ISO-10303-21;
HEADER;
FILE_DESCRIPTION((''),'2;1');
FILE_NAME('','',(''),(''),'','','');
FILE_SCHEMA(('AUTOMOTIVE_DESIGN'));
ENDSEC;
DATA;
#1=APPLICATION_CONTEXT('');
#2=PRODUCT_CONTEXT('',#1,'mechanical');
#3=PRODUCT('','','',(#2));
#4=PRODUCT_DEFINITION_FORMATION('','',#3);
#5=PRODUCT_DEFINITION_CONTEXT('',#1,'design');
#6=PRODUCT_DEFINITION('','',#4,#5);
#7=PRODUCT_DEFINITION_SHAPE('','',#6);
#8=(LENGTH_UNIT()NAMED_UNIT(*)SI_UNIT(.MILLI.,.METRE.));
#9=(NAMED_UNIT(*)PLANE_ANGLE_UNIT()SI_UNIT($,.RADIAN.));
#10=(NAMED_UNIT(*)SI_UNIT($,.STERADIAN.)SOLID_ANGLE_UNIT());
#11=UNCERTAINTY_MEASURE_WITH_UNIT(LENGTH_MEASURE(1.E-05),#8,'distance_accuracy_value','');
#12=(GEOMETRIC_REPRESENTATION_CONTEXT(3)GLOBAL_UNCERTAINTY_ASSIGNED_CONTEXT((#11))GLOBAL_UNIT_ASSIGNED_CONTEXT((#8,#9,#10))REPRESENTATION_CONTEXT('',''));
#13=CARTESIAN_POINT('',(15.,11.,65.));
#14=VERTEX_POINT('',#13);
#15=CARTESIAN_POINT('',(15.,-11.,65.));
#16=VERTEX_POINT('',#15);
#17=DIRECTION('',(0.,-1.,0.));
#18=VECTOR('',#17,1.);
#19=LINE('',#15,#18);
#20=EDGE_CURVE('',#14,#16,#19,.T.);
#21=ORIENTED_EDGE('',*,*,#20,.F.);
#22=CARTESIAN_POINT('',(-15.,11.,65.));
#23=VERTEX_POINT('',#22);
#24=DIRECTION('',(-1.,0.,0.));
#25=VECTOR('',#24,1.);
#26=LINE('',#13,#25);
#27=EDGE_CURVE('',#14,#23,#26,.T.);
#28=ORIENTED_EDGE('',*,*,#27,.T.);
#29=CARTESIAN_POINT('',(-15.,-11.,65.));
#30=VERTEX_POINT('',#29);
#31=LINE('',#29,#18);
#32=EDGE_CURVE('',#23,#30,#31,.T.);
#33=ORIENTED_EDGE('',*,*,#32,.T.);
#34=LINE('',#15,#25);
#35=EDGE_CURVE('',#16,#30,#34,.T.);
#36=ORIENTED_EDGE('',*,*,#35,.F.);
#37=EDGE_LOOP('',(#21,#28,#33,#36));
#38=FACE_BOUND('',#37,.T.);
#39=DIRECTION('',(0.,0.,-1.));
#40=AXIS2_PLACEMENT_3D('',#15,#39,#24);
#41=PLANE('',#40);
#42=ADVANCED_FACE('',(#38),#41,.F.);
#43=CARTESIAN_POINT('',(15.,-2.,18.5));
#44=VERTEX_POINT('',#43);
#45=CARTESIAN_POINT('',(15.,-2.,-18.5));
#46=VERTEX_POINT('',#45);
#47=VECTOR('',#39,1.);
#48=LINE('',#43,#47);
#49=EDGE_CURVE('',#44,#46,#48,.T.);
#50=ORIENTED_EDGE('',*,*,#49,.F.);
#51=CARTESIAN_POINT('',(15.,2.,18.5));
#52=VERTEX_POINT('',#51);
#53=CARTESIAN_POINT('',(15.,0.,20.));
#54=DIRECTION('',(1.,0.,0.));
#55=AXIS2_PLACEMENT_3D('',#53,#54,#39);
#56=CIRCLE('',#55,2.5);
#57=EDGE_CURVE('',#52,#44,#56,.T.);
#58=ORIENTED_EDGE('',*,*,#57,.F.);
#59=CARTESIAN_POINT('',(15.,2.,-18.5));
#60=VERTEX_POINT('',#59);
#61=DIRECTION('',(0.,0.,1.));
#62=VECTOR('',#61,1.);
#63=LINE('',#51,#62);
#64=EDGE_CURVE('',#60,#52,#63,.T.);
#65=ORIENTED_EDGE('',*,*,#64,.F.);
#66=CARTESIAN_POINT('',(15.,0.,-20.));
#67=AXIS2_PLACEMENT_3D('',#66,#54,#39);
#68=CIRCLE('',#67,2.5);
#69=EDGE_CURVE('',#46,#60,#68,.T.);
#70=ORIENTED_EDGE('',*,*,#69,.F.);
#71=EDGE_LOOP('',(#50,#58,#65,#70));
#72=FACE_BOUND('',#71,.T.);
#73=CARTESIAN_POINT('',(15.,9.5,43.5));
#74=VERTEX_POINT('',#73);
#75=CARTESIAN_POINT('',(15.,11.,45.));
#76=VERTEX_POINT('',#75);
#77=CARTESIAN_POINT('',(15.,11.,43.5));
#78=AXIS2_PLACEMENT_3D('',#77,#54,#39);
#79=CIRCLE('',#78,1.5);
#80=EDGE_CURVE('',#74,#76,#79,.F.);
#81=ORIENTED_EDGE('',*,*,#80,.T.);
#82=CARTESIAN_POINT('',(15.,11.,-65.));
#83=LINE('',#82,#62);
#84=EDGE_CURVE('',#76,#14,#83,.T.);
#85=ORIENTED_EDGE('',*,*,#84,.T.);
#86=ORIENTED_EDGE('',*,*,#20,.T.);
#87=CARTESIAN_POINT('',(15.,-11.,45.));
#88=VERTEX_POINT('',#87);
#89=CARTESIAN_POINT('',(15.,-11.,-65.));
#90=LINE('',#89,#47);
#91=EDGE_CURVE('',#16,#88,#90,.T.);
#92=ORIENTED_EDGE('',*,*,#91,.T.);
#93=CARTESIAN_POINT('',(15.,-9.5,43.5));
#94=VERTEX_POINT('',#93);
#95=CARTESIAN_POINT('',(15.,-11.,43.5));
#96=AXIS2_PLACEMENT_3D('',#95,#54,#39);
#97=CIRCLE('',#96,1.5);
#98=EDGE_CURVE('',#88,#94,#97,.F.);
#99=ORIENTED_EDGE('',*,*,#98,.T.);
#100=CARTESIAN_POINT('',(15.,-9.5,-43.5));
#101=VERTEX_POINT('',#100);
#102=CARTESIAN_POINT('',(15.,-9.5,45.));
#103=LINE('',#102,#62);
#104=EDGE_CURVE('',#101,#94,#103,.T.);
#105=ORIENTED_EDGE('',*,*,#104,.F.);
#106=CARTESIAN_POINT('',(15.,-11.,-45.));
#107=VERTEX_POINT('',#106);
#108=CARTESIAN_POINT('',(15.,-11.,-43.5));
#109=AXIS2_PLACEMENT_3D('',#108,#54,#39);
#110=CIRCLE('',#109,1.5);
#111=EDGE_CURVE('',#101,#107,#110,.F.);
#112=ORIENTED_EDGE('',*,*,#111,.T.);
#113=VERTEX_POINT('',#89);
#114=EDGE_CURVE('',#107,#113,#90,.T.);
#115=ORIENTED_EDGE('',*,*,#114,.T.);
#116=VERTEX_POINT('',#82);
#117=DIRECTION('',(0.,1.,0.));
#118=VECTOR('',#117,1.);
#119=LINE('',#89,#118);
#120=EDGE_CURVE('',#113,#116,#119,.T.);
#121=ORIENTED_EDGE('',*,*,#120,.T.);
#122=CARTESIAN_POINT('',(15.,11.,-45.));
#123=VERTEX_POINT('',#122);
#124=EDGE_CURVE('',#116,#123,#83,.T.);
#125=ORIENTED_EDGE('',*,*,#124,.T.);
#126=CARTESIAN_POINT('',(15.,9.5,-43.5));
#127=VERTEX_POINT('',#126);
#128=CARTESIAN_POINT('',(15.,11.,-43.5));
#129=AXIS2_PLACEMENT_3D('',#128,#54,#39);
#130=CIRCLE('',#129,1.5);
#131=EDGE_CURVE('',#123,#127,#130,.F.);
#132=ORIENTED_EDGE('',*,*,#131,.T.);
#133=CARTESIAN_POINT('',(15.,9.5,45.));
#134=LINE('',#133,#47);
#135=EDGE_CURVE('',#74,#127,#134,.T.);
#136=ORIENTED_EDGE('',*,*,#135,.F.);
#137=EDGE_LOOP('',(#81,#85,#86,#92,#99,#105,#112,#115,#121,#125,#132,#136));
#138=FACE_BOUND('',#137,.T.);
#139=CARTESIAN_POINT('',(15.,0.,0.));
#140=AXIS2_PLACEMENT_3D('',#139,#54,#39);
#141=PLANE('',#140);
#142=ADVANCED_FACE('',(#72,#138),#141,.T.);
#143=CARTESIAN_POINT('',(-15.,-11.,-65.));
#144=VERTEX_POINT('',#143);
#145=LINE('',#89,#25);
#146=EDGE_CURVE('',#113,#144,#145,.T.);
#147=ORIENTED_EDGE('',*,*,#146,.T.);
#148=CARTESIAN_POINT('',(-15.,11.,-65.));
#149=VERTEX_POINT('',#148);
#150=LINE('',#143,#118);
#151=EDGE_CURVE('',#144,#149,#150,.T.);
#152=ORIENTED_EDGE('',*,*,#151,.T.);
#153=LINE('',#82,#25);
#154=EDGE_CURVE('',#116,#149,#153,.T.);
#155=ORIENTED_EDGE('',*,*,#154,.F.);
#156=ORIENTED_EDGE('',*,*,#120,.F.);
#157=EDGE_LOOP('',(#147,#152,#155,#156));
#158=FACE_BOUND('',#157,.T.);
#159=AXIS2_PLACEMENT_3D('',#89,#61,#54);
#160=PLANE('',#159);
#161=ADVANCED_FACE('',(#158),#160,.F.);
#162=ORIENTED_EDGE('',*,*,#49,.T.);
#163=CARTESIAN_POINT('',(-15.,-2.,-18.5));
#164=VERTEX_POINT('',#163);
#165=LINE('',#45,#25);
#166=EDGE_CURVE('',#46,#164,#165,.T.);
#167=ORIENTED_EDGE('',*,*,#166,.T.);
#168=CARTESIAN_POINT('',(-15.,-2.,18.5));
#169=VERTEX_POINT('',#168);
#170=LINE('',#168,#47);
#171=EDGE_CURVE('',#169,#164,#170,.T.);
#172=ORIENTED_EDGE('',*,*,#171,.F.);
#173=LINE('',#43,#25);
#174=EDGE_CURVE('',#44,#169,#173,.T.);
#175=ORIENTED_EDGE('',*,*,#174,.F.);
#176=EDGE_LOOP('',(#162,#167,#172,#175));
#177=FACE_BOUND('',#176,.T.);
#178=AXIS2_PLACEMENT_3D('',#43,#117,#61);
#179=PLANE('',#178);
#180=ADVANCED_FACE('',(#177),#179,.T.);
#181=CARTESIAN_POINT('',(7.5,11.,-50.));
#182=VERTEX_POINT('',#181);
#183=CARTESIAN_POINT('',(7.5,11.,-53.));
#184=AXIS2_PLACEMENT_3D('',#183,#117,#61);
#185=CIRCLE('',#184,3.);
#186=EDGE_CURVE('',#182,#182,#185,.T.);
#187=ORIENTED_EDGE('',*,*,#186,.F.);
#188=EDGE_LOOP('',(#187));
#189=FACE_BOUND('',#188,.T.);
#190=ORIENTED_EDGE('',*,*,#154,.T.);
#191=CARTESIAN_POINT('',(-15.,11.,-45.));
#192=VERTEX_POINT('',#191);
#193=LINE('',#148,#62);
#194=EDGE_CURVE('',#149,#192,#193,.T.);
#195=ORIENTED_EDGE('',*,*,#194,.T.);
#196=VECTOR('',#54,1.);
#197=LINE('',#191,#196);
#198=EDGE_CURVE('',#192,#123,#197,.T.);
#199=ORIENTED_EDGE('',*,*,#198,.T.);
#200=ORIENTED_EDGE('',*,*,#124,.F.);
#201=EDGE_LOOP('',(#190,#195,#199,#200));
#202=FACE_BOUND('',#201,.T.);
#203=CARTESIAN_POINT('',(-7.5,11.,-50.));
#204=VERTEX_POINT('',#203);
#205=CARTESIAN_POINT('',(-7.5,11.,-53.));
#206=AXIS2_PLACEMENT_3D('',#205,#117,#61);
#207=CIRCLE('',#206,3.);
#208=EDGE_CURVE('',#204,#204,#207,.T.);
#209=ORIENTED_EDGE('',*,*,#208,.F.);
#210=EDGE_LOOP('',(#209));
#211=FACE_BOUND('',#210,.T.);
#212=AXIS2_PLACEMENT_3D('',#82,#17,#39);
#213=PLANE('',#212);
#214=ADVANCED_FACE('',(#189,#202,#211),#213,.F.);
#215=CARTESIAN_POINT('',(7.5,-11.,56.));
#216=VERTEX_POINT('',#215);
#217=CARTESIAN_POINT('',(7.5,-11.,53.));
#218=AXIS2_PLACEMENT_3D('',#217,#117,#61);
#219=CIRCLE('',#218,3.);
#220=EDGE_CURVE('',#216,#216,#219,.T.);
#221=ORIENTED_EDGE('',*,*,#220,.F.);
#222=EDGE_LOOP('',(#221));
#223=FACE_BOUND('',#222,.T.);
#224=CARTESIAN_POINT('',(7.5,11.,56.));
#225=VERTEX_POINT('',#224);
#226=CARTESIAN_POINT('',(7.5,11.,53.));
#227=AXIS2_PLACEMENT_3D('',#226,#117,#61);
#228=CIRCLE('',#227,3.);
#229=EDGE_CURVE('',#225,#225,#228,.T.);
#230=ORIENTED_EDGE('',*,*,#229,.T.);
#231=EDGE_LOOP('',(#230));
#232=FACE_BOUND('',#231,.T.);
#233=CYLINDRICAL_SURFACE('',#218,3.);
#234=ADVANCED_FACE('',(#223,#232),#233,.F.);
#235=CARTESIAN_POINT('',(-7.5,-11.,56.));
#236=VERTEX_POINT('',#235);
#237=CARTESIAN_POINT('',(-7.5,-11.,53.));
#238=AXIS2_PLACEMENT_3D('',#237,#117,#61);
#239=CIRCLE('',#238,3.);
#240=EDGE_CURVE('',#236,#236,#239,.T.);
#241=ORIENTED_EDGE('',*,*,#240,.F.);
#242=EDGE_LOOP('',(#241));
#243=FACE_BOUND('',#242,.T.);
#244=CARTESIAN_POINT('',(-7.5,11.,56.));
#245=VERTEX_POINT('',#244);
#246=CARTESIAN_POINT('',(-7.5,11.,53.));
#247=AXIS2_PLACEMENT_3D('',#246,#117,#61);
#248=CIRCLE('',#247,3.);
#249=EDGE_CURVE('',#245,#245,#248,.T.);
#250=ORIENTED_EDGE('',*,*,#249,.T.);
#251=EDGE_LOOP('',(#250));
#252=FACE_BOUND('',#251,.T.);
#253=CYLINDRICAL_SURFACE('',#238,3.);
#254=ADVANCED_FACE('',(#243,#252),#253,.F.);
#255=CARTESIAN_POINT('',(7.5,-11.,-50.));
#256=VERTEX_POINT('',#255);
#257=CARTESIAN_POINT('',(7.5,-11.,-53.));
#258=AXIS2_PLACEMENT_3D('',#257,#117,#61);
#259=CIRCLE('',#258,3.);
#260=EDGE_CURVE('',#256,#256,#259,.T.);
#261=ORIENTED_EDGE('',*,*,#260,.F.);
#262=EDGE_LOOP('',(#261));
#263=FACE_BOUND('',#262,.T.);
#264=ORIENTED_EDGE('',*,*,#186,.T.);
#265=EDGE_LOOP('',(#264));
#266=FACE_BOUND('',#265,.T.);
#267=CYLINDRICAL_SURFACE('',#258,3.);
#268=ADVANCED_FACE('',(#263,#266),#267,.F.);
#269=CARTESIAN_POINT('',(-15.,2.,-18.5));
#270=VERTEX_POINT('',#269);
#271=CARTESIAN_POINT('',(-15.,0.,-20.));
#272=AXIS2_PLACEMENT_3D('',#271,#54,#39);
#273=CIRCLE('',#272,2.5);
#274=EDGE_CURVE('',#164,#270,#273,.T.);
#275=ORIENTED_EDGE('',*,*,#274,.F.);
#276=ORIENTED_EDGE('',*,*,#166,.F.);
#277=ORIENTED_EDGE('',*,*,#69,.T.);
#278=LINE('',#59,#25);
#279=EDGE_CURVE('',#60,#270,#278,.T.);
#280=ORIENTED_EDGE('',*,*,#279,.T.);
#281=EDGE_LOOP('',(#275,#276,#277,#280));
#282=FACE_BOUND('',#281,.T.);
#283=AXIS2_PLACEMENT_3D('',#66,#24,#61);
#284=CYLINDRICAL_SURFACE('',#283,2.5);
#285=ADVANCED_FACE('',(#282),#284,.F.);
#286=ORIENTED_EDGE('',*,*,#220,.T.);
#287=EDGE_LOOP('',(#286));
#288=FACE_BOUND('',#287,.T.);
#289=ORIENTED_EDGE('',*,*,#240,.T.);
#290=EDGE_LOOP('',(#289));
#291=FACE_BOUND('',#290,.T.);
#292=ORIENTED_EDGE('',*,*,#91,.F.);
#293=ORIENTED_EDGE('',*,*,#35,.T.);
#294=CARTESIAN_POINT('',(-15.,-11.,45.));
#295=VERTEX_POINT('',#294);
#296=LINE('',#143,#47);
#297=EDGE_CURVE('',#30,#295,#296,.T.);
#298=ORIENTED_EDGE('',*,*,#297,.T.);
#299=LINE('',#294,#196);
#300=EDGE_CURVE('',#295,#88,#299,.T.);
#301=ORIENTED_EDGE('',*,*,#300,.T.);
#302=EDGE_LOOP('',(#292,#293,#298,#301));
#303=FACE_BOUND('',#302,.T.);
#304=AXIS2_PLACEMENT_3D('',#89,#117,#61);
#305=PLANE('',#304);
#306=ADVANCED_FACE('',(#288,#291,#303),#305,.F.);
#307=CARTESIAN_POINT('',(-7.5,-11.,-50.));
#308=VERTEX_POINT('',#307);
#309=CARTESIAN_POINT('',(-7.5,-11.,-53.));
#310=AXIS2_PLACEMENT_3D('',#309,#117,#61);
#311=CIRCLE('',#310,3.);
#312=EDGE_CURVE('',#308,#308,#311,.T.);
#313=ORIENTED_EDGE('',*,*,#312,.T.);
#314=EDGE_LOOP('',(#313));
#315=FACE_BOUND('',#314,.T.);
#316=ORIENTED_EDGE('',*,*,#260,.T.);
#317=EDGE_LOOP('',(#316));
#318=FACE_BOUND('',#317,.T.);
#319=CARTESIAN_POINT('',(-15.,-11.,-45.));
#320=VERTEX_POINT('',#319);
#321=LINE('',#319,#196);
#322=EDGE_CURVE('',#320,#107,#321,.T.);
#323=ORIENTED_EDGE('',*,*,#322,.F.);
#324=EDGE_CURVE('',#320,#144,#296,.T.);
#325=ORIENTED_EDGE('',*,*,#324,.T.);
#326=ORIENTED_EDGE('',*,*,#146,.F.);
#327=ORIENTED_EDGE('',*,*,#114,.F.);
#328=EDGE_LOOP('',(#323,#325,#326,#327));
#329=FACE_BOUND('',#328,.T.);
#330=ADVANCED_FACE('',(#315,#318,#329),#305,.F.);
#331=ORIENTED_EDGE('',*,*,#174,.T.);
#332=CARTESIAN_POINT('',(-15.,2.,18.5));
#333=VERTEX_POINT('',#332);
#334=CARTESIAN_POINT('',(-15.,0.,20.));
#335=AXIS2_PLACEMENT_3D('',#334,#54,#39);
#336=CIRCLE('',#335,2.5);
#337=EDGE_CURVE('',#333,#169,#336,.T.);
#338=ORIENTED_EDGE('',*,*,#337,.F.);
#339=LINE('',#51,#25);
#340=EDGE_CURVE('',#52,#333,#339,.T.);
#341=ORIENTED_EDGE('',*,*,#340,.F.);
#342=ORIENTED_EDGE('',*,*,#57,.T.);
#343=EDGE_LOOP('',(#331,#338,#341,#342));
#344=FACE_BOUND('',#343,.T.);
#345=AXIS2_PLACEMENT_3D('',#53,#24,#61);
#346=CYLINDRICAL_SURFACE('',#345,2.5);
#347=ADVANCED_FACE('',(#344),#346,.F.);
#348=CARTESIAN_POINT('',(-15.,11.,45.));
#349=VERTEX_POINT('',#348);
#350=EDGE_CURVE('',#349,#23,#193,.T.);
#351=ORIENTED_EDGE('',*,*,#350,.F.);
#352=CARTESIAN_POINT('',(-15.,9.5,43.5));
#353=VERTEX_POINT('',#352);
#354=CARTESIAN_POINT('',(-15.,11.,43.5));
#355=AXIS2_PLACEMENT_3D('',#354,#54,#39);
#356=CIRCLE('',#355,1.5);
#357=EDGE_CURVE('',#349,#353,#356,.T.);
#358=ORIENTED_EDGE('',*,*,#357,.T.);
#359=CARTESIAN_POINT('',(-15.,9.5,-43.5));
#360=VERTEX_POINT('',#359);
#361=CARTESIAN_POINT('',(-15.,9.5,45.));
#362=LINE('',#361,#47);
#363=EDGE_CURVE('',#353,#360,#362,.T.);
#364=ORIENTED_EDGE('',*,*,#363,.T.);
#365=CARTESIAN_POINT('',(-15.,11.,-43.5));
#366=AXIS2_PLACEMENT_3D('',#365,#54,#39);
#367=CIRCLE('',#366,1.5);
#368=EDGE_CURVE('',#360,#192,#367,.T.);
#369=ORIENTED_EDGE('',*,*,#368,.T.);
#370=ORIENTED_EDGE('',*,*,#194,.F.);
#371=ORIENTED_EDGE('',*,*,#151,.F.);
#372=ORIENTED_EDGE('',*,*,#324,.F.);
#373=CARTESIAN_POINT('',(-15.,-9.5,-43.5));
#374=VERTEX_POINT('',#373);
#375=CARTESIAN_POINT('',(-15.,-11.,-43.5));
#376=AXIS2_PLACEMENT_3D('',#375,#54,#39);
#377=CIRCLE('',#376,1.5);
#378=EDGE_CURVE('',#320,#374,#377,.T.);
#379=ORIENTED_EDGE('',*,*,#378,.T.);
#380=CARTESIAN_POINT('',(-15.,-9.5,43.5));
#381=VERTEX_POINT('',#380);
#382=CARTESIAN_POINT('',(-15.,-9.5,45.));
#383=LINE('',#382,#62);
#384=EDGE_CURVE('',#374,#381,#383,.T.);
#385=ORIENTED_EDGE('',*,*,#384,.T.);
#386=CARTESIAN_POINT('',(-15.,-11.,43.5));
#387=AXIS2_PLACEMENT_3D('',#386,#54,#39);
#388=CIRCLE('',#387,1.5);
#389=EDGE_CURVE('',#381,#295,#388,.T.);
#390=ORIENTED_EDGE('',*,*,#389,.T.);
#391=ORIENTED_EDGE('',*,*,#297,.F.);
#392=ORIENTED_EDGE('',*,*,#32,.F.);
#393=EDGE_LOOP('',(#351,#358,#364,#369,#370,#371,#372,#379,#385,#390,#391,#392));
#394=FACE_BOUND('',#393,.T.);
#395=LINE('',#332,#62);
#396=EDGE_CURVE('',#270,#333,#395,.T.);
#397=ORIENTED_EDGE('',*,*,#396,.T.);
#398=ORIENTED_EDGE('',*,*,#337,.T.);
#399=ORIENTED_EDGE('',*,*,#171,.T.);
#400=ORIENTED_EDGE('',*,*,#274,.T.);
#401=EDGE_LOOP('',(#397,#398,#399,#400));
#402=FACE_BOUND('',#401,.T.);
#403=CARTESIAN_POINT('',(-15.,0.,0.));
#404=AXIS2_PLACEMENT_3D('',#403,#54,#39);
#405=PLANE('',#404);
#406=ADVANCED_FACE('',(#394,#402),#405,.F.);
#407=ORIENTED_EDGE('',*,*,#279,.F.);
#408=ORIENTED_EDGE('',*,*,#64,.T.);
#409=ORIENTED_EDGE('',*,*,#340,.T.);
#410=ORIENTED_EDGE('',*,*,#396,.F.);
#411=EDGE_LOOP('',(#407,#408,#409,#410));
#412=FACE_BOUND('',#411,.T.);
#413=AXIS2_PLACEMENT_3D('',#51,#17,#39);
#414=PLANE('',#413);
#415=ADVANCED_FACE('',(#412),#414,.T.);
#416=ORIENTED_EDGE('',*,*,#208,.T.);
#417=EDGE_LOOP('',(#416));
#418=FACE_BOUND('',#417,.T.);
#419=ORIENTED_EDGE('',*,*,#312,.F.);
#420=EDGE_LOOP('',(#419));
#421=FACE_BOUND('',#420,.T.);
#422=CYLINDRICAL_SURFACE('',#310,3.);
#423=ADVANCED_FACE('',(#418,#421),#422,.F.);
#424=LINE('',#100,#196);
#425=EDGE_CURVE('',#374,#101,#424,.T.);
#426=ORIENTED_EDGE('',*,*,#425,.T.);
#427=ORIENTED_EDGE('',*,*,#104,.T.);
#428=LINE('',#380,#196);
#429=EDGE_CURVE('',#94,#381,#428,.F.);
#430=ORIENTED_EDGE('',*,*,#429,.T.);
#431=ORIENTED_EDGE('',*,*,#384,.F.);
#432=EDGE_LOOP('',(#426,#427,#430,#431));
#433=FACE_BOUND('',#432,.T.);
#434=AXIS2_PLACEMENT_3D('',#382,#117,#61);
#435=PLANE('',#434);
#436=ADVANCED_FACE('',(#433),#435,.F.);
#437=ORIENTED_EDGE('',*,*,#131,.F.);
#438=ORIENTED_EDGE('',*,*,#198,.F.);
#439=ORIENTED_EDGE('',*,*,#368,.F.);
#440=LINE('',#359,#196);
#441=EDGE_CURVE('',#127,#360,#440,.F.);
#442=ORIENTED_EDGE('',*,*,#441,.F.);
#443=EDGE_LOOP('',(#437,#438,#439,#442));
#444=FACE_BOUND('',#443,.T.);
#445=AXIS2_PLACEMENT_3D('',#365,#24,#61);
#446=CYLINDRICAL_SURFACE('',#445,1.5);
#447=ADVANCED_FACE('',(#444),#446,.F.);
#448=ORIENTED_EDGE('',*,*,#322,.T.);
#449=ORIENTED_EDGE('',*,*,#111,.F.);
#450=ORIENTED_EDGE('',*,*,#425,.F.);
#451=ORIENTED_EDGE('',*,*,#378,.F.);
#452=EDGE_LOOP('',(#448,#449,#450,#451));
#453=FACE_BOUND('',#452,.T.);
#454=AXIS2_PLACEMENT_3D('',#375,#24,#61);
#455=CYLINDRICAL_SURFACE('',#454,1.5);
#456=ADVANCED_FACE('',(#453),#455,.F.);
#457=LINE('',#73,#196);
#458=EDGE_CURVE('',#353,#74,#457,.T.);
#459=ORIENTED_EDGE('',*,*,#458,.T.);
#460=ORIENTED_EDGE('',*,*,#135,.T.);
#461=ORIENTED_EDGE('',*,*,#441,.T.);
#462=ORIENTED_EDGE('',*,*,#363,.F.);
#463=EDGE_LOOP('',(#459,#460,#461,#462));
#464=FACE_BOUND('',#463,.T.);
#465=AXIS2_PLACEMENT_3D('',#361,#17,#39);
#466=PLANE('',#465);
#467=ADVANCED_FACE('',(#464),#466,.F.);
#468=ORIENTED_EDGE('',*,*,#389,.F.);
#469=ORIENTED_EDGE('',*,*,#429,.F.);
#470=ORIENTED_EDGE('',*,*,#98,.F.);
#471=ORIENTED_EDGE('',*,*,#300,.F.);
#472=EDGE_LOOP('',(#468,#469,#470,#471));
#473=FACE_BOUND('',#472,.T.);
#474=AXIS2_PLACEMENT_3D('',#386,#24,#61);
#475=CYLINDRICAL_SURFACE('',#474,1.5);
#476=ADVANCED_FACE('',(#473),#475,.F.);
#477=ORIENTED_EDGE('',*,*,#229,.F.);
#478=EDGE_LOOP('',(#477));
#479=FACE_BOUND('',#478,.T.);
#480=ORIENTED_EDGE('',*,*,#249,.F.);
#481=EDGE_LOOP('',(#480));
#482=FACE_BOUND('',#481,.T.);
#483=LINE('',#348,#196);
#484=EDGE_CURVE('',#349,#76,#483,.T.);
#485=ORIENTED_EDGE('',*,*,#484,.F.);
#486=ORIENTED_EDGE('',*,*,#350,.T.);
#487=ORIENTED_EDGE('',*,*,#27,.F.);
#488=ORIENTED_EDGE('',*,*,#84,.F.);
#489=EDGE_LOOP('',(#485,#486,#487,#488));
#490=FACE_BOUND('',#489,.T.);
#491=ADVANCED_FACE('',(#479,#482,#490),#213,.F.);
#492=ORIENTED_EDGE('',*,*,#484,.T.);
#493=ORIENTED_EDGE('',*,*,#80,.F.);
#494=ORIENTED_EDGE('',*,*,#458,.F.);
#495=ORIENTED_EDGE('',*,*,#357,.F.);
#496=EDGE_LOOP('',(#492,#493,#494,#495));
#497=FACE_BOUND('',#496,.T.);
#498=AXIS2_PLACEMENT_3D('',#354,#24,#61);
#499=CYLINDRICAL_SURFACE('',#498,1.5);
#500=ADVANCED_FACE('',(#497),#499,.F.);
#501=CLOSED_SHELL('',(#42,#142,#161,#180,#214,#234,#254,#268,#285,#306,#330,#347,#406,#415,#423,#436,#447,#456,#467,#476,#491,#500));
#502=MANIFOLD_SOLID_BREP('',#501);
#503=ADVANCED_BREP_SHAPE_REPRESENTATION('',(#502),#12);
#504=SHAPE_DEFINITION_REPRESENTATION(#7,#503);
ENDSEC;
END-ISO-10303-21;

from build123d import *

# Parameters (mm, degrees)
SKETCH1_W           = 130
SKETCH1_H           = 22
BOSS_EXTRUDE1_DEPTH = 15
SKETCH2_R           = 3
CUT_EXTRUDE1_DEPTH  = 71.242437315
SKETCH3_W           = 90
SKETCH3_H           = 1.5
CUT_EXTRUDE2_DEPTH  = 30
FILLET1_R           = 1.5


with BuildPart() as part:
    # Sketch1 → Boss-Extrude1 (new, symmetric)
    with BuildSketch(Plane(origin=(0, 0, 0), x_dir=(0, 0, -1), z_dir=(1, 0, 0))):
        Rectangle(SKETCH1_W, SKETCH1_H)
        with BuildLine():
            Line((-18.5, 2), (18.5, 2))
            ThreePointArc((18.5, 2), (22.5, 0), (18.5, -2))
            Line((18.5, -2), (-18.5, -2))
            ThreePointArc((-18.5, -2), (-22.5, 0), (-18.5, 2))
        make_face(mode=Mode.SUBTRACT)
    extrude(amount=BOSS_EXTRUDE1_DEPTH, both=True)

    # Sketch2 → Cut-Extrude1 (cut, through all)
    with BuildSketch(Plane(origin=(0, 11, 0), x_dir=(1, 0, 0), z_dir=(0, 1, 0))):
        with Locations(Location((-7.5, 53, 0), (0, 0, 270))):
            Circle(SKETCH2_R)
        with Locations(Location((7.5, 53, 0), (0, 0, 270))):
            Circle(SKETCH2_R)
        with Locations(Location((-7.5, -53, 0), (0, 0, 270))):
            Circle(SKETCH2_R)
        with Locations(Location((7.5, -53, 0), (0, 0, 270))):
            Circle(SKETCH2_R)
    extrude(amount=-CUT_EXTRUDE1_DEPTH, mode=Mode.SUBTRACT)

    # Sketch3 → Cut-Extrude2 (cut)
    with BuildSketch(Plane(origin=(15, 0, 0), x_dir=(0, 0, -1), z_dir=(1, 0, 0))):
        with Locations((0, -10.25)):
            Rectangle(SKETCH3_W, SKETCH3_H)
        with Locations((0, 10.25)):
            Rectangle(SKETCH3_W, SKETCH3_H)
    extrude(amount=-CUT_EXTRUDE2_DEPTH, mode=Mode.SUBTRACT)

    # Fillet1
    fillet1_edges = [part.edges().sort_by_distance(p)[0] for p in [
        (0, -9.5, 45),
        (0, -9.5, -45),
        (0, 9.5, -45),
        (0, 9.5, 45),
    ]]
    fillet(fillet1_edges, radius=FILLET1_R - 0.0001)  # a hair under: the kernel refuses the full size


solid = part.part
